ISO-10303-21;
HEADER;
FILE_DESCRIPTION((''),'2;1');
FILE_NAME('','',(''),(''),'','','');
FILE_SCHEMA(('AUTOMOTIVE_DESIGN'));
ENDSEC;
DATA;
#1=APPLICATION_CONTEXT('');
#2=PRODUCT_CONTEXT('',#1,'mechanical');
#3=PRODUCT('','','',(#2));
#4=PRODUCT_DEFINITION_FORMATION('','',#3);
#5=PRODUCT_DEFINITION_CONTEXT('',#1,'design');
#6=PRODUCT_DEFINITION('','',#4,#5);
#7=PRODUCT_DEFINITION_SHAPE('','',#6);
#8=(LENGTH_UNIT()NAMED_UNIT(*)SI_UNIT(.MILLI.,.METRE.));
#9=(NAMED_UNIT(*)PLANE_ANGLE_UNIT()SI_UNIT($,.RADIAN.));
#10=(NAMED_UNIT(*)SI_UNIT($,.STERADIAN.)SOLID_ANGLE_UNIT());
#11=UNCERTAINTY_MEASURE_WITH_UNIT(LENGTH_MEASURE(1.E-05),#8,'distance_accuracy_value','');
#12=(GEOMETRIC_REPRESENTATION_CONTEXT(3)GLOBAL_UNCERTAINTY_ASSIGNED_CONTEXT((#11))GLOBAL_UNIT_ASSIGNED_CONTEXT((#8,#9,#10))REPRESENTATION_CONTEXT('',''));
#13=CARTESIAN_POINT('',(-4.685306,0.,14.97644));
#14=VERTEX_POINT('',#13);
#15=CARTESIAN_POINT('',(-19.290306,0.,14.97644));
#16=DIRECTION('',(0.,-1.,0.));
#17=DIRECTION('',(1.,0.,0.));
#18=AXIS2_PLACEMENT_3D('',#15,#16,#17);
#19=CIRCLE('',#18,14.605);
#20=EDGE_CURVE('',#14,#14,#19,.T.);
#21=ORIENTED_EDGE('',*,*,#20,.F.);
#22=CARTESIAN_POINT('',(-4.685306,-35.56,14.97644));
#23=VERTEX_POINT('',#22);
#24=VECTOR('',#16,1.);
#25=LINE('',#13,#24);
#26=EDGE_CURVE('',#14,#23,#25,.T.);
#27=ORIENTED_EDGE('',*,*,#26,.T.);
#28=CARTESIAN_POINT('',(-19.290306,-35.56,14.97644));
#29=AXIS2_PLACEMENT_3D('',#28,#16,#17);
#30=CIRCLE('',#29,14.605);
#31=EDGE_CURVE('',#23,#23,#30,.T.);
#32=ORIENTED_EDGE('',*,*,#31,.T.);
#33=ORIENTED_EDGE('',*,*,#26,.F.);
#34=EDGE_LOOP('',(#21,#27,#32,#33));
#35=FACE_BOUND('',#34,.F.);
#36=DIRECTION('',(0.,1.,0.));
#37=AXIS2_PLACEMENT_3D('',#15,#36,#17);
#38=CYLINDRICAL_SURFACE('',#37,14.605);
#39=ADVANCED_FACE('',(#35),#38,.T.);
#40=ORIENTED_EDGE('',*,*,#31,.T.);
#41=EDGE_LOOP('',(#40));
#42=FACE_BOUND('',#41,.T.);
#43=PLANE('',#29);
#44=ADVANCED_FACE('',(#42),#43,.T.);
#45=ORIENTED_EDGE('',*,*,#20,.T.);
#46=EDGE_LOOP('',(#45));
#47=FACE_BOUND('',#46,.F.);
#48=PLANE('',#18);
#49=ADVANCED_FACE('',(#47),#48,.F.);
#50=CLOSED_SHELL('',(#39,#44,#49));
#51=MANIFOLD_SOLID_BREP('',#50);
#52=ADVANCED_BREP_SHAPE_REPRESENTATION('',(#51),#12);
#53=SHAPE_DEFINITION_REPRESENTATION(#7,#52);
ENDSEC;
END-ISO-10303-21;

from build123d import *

# Parameters (mm, degrees)
F0_R     = 14.605
F0_R_2   = 1.016
F1_DEPTH = 35.56


# Not quite as in the source:
# - the program builds the solid bodies; features that only make, move or delete a surface that nothing else refers to are left out


with BuildPart() as f1:
    # F0 (on Front) → F1 (new body)
    with BuildSketch(Plane.XZ):
        with Locations((-19.2903056741, 14.9764399976)):
            Circle(F0_R)
        with Locations((-19.2903056741, 14.9764399976)):
            Circle(F0_R_2, mode=Mode.SUBTRACT)
        with Locations((-19.2903056741, 14.9764399976)):
            Circle(F0_R_2)
    extrude(amount=F1_DEPTH)


solid = f1.part
